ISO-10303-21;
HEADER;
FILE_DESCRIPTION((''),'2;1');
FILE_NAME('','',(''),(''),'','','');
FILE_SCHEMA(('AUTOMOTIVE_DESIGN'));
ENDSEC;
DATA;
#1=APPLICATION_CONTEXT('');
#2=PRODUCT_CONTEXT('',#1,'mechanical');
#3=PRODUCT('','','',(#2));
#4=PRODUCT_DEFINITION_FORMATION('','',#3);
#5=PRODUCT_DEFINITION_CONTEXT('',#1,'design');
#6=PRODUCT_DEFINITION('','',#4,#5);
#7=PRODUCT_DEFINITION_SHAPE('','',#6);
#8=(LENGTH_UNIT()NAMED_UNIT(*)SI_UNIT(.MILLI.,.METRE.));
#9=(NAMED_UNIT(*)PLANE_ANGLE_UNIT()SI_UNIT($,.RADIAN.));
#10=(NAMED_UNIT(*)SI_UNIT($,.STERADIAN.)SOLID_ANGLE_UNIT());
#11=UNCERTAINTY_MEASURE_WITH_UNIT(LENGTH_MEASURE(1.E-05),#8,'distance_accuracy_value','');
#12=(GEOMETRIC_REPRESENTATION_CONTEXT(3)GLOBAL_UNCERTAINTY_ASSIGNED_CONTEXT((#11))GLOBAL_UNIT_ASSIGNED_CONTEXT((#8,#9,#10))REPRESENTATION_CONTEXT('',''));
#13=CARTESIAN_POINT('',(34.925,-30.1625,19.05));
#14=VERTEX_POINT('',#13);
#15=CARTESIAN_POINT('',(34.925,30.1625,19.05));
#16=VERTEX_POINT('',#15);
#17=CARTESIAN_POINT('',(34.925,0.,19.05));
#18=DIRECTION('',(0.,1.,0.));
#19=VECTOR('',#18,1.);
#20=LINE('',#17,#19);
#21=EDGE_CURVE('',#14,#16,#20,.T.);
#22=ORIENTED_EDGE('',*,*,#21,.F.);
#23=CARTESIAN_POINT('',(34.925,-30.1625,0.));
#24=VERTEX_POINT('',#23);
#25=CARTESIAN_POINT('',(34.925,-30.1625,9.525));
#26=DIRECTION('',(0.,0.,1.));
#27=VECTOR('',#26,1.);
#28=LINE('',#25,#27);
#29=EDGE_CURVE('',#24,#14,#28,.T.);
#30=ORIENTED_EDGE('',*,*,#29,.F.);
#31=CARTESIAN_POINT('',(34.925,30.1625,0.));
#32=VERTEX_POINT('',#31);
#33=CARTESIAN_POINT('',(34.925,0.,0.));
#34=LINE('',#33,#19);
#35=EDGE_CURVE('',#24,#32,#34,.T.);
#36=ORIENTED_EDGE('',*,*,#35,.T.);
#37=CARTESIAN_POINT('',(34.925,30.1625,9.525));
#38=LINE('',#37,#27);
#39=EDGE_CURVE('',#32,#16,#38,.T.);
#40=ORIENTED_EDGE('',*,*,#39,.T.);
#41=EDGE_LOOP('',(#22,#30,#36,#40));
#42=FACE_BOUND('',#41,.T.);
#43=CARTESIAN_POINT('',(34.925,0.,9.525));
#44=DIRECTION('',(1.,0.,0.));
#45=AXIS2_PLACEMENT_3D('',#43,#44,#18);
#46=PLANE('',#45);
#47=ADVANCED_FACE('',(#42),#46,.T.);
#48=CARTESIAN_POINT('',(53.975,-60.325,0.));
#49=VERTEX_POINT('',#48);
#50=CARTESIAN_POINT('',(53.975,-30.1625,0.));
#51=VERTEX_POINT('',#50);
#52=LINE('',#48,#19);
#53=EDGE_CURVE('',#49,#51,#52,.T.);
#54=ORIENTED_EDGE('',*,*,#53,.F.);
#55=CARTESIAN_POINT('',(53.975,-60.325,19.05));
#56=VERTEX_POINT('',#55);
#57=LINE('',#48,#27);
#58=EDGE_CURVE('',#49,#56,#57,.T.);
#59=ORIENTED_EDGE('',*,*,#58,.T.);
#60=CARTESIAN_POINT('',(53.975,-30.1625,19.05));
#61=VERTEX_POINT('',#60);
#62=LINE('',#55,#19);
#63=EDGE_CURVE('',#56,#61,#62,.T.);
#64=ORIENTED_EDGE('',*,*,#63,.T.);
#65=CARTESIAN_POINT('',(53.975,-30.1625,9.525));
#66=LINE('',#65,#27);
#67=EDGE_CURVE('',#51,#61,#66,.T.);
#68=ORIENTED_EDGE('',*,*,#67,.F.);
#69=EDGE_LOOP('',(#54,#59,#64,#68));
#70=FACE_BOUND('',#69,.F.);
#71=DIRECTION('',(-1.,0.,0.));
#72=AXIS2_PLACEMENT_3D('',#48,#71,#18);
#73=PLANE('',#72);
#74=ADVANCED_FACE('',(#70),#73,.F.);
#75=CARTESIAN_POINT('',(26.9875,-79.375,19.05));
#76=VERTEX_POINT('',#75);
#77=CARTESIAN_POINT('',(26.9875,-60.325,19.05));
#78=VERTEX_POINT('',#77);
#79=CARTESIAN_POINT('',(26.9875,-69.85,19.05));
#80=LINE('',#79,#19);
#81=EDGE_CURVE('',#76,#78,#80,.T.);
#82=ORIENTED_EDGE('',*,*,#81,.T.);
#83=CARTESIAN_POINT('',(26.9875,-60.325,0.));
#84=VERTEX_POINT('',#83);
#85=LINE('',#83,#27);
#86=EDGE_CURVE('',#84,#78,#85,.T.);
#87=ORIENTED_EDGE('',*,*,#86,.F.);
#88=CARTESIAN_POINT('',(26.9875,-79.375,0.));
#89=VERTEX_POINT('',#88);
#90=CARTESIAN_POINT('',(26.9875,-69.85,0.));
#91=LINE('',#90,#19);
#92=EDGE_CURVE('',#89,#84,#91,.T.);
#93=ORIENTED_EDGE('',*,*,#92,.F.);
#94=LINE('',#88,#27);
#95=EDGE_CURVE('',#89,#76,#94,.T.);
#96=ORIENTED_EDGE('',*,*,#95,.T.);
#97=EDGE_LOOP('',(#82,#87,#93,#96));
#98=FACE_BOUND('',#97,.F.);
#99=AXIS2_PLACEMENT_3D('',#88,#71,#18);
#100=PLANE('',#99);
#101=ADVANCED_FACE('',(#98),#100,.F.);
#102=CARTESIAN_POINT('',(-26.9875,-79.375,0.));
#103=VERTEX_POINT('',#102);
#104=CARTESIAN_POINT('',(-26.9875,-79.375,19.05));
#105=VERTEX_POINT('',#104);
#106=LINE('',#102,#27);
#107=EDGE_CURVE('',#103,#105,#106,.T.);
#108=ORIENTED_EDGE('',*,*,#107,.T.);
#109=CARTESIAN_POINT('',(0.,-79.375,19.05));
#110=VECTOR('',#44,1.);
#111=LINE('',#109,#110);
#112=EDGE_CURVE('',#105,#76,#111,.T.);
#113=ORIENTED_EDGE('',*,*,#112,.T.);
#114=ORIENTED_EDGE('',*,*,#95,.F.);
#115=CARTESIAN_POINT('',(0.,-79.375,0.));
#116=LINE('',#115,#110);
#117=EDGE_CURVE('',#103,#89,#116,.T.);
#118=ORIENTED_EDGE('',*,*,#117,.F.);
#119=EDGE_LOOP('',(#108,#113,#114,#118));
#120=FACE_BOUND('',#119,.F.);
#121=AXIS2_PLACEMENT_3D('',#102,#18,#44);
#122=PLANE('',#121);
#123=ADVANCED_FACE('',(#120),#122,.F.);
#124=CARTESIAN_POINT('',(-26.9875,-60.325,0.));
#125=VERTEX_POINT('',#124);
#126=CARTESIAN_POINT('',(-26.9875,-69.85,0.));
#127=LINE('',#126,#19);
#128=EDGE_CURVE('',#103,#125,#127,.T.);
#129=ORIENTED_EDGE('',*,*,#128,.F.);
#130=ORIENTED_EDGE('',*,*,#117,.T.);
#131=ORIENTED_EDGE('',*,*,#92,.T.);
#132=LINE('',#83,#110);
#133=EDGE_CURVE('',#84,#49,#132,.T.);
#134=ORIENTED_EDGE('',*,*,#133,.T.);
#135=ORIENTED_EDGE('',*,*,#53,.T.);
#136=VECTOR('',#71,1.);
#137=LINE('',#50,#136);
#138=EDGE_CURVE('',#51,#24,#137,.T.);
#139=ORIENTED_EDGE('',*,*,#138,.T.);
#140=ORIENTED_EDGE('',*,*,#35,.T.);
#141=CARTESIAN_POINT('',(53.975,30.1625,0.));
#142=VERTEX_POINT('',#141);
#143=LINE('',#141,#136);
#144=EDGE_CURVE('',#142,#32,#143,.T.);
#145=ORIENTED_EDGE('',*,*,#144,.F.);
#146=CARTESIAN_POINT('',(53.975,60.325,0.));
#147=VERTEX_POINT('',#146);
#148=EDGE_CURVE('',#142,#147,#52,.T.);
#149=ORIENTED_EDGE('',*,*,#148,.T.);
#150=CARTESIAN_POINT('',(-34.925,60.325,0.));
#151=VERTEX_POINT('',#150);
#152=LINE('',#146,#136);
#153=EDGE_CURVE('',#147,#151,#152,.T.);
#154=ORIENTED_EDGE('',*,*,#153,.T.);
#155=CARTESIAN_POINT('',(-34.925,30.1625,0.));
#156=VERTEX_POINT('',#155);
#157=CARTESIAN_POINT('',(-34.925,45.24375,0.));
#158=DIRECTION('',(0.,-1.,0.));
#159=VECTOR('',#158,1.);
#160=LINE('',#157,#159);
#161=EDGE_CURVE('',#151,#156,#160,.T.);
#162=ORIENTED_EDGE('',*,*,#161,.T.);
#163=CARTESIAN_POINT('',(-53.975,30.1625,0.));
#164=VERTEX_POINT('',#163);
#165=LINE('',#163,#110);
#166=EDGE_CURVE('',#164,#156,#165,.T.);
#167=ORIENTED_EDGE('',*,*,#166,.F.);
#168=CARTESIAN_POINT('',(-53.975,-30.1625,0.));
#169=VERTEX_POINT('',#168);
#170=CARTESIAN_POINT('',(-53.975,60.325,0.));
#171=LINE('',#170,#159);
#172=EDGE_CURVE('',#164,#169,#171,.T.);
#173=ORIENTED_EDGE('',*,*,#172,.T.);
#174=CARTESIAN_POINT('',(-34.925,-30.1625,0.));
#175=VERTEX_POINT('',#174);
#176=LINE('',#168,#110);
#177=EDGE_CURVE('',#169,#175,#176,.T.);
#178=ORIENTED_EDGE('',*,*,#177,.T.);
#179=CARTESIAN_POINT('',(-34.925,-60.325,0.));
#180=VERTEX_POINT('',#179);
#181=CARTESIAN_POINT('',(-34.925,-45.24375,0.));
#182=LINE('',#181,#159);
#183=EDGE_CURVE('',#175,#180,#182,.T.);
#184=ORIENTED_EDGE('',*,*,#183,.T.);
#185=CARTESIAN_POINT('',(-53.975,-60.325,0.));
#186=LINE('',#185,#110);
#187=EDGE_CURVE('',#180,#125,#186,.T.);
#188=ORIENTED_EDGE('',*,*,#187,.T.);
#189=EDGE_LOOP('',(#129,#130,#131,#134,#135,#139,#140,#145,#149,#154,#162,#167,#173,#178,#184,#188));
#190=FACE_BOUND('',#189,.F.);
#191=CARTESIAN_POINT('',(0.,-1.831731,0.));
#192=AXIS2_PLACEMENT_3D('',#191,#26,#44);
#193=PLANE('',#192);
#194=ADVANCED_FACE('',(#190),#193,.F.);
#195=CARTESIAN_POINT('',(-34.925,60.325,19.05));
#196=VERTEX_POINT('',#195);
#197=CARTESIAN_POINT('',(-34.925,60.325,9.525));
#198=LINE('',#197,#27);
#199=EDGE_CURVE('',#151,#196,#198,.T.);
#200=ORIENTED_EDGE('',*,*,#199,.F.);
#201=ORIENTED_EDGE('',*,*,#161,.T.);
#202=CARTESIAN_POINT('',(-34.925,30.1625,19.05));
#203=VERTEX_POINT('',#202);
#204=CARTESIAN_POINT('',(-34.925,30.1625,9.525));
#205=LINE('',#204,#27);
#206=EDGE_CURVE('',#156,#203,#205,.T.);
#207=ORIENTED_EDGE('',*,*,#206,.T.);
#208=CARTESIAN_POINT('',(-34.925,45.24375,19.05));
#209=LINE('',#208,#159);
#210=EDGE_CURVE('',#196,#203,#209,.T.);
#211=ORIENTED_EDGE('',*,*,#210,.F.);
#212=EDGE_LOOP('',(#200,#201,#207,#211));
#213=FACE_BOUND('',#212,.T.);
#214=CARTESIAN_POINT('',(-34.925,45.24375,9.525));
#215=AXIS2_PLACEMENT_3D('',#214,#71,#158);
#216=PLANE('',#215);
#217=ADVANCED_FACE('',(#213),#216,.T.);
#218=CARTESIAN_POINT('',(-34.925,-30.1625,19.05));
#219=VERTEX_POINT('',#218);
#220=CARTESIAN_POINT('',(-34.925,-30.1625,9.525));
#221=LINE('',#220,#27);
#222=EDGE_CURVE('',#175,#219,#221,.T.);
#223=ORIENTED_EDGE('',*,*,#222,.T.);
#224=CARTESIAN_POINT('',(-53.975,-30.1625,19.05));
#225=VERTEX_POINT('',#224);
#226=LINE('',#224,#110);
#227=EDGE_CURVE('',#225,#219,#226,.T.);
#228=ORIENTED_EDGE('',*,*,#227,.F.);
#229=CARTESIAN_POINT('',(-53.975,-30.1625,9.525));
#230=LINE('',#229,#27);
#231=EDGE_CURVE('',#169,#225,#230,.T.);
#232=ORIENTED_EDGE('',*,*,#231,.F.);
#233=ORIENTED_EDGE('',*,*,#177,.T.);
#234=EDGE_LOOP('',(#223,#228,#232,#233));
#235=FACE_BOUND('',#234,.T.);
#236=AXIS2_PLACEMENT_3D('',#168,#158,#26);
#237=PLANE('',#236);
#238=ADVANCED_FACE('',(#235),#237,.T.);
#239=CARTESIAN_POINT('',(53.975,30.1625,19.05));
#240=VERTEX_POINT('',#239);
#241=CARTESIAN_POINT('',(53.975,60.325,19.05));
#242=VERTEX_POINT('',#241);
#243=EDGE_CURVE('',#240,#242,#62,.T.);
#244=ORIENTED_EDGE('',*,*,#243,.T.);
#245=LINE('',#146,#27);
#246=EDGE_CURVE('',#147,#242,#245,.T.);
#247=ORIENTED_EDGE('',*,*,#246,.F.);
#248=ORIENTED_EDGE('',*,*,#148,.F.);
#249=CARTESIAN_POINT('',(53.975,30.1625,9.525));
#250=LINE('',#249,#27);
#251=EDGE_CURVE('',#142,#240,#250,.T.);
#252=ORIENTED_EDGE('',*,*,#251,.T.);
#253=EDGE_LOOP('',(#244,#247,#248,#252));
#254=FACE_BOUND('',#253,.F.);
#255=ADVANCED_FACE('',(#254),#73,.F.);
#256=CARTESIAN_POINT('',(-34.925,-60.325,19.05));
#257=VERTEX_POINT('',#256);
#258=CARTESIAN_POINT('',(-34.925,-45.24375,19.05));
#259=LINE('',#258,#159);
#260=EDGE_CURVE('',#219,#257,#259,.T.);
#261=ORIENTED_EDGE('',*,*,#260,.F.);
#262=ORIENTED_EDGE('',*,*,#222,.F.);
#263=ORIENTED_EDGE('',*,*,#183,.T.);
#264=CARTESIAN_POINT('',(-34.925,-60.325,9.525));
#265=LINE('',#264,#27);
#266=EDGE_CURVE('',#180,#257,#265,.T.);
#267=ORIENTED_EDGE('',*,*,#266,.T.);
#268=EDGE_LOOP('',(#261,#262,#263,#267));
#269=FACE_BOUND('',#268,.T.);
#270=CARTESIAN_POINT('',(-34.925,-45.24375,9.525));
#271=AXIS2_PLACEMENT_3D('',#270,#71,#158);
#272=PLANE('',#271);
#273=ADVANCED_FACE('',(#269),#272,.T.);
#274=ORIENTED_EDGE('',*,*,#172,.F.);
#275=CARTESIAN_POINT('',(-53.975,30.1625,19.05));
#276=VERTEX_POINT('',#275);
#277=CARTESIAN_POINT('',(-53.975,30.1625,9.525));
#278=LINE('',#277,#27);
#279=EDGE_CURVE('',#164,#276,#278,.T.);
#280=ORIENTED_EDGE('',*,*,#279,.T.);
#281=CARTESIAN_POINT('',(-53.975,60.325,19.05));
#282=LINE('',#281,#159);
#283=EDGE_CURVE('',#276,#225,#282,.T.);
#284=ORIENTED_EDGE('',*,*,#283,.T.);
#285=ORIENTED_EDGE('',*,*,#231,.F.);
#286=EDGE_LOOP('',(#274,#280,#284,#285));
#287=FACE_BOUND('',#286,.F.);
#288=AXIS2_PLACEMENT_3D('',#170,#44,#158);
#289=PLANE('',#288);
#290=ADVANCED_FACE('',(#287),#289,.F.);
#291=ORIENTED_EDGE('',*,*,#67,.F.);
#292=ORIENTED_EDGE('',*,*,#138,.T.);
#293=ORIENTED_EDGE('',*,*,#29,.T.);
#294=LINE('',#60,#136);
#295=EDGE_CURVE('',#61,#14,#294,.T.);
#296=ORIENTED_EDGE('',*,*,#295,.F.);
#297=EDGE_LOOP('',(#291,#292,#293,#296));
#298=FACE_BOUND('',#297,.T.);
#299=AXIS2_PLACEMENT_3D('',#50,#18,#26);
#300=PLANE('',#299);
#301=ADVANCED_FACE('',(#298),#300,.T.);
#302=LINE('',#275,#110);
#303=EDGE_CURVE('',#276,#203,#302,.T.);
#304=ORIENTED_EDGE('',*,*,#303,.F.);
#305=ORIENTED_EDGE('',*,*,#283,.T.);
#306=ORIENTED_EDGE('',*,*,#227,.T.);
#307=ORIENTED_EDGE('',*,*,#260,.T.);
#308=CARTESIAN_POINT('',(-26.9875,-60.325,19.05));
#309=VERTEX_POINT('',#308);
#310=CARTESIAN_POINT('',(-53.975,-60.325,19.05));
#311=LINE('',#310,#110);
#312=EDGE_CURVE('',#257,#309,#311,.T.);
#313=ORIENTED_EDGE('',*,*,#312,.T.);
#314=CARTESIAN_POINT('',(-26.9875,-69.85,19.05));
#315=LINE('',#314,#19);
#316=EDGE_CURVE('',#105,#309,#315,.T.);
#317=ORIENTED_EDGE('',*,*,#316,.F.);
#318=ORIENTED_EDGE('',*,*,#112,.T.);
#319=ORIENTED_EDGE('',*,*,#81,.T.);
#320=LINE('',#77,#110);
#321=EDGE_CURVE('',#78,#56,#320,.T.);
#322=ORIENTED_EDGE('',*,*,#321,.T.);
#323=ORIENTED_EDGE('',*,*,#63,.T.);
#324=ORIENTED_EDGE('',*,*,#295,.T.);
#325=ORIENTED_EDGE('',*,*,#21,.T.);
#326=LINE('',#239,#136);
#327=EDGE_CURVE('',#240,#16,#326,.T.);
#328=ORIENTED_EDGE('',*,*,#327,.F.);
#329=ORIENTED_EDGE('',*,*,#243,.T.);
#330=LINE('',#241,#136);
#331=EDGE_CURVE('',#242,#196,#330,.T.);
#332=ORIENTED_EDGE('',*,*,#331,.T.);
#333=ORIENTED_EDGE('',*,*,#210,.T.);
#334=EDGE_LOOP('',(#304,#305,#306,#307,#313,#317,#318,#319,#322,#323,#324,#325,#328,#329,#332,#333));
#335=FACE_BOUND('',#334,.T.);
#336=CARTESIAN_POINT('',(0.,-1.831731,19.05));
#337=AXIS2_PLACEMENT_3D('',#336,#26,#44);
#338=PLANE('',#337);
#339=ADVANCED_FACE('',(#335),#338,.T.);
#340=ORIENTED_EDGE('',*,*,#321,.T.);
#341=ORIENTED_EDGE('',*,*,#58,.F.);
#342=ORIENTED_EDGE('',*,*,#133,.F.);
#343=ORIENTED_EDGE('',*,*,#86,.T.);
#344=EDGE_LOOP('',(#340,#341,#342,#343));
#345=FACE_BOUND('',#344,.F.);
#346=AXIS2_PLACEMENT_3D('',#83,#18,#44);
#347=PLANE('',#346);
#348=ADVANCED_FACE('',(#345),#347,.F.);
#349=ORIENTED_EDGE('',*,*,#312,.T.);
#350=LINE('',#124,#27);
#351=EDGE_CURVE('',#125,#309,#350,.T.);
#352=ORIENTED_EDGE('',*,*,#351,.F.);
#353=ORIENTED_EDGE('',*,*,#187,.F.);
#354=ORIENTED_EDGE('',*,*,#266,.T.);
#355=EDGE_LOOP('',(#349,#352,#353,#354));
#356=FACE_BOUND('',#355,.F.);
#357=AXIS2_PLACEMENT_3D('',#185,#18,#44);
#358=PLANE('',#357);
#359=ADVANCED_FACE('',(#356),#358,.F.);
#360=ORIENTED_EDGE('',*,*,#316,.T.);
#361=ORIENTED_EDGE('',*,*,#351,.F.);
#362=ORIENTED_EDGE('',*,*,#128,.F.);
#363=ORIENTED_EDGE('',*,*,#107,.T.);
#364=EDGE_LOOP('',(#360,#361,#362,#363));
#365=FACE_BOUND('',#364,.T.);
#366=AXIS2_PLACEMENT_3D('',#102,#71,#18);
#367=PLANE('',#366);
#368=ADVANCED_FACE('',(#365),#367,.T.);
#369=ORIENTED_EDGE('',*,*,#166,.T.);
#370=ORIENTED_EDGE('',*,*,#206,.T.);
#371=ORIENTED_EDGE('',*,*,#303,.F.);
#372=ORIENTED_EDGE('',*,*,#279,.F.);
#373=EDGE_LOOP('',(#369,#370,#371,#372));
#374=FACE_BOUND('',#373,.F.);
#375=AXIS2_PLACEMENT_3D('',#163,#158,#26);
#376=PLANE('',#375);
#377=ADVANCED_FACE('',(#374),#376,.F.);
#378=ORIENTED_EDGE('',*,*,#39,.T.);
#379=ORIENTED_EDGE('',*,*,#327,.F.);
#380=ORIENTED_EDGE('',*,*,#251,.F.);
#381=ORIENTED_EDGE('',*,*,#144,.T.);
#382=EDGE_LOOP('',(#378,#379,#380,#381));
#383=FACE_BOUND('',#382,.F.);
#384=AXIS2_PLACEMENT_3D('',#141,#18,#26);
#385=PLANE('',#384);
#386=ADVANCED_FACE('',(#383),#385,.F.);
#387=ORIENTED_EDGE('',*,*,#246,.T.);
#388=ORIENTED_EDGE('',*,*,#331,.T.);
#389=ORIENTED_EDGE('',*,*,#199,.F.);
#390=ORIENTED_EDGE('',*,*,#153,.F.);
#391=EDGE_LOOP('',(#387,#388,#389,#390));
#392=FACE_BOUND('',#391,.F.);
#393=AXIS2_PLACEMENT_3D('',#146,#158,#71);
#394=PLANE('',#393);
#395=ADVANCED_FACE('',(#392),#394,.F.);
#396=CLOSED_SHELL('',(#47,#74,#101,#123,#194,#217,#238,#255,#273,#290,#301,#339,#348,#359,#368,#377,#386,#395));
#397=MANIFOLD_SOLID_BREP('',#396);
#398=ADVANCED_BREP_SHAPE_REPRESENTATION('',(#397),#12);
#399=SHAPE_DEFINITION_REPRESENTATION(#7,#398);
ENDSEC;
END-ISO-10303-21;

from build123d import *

# Parameters (mm, degrees)
F0_W     = 53.975
F0_H     = 19.05
F1_DEPTH = 19.05
F2_W     = 60.325
F2_H     = 19.05
F3_DEPTH = 19.05
F4_W     = 30.1625
F4_H     = 19.05
F5_DEPTH = 19.05


# Not quite as in the source:
# - a length typed as a fraction of an inch, garbled in the dataset ("3 / 203.2 mm" for 3/8 in), is restored


with BuildPart() as f1:
    # F0 (on Top) → F1 (new body)
    with BuildSketch(Plane.XY):
        Polygon((53.975, -60.325), (53.975, 60.325), (-53.975, 60.325), (-53.975, -60.325), (-26.9875, -60.325), (-26.9875, -41.275), (26.9875, -41.275), (26.9875, -60.325), align=None)
        with Locations((0, -69.85)):
            Rectangle(F0_W, F0_H)
        with Locations((0, -50.8)):
            Rectangle(F0_W, F0_H)
    extrude(amount=F1_DEPTH)

    # F2 (on face) → F3 (cut)
    with BuildSketch(Plane.YZ.offset(53.975)):
        with Locations((0, 9.525)):
            Rectangle(F2_W, F2_H)
    extrude(amount=-F3_DEPTH, mode=Mode.SUBTRACT)

    # F4 (on face) → F5 (cut)
    with BuildSketch(Plane(origin=(-53.975, 0, 0), x_dir=(0, -1, 0), z_dir=(-1, 0, 0))):
        with Locations((-45.24375, 9.525)):
            Rectangle(F4_W, F4_H)
        with Locations((45.24375, 9.525)):
            Rectangle(F4_W, F4_H)
    extrude(amount=-F5_DEPTH, mode=Mode.SUBTRACT)


solid = f1.part
